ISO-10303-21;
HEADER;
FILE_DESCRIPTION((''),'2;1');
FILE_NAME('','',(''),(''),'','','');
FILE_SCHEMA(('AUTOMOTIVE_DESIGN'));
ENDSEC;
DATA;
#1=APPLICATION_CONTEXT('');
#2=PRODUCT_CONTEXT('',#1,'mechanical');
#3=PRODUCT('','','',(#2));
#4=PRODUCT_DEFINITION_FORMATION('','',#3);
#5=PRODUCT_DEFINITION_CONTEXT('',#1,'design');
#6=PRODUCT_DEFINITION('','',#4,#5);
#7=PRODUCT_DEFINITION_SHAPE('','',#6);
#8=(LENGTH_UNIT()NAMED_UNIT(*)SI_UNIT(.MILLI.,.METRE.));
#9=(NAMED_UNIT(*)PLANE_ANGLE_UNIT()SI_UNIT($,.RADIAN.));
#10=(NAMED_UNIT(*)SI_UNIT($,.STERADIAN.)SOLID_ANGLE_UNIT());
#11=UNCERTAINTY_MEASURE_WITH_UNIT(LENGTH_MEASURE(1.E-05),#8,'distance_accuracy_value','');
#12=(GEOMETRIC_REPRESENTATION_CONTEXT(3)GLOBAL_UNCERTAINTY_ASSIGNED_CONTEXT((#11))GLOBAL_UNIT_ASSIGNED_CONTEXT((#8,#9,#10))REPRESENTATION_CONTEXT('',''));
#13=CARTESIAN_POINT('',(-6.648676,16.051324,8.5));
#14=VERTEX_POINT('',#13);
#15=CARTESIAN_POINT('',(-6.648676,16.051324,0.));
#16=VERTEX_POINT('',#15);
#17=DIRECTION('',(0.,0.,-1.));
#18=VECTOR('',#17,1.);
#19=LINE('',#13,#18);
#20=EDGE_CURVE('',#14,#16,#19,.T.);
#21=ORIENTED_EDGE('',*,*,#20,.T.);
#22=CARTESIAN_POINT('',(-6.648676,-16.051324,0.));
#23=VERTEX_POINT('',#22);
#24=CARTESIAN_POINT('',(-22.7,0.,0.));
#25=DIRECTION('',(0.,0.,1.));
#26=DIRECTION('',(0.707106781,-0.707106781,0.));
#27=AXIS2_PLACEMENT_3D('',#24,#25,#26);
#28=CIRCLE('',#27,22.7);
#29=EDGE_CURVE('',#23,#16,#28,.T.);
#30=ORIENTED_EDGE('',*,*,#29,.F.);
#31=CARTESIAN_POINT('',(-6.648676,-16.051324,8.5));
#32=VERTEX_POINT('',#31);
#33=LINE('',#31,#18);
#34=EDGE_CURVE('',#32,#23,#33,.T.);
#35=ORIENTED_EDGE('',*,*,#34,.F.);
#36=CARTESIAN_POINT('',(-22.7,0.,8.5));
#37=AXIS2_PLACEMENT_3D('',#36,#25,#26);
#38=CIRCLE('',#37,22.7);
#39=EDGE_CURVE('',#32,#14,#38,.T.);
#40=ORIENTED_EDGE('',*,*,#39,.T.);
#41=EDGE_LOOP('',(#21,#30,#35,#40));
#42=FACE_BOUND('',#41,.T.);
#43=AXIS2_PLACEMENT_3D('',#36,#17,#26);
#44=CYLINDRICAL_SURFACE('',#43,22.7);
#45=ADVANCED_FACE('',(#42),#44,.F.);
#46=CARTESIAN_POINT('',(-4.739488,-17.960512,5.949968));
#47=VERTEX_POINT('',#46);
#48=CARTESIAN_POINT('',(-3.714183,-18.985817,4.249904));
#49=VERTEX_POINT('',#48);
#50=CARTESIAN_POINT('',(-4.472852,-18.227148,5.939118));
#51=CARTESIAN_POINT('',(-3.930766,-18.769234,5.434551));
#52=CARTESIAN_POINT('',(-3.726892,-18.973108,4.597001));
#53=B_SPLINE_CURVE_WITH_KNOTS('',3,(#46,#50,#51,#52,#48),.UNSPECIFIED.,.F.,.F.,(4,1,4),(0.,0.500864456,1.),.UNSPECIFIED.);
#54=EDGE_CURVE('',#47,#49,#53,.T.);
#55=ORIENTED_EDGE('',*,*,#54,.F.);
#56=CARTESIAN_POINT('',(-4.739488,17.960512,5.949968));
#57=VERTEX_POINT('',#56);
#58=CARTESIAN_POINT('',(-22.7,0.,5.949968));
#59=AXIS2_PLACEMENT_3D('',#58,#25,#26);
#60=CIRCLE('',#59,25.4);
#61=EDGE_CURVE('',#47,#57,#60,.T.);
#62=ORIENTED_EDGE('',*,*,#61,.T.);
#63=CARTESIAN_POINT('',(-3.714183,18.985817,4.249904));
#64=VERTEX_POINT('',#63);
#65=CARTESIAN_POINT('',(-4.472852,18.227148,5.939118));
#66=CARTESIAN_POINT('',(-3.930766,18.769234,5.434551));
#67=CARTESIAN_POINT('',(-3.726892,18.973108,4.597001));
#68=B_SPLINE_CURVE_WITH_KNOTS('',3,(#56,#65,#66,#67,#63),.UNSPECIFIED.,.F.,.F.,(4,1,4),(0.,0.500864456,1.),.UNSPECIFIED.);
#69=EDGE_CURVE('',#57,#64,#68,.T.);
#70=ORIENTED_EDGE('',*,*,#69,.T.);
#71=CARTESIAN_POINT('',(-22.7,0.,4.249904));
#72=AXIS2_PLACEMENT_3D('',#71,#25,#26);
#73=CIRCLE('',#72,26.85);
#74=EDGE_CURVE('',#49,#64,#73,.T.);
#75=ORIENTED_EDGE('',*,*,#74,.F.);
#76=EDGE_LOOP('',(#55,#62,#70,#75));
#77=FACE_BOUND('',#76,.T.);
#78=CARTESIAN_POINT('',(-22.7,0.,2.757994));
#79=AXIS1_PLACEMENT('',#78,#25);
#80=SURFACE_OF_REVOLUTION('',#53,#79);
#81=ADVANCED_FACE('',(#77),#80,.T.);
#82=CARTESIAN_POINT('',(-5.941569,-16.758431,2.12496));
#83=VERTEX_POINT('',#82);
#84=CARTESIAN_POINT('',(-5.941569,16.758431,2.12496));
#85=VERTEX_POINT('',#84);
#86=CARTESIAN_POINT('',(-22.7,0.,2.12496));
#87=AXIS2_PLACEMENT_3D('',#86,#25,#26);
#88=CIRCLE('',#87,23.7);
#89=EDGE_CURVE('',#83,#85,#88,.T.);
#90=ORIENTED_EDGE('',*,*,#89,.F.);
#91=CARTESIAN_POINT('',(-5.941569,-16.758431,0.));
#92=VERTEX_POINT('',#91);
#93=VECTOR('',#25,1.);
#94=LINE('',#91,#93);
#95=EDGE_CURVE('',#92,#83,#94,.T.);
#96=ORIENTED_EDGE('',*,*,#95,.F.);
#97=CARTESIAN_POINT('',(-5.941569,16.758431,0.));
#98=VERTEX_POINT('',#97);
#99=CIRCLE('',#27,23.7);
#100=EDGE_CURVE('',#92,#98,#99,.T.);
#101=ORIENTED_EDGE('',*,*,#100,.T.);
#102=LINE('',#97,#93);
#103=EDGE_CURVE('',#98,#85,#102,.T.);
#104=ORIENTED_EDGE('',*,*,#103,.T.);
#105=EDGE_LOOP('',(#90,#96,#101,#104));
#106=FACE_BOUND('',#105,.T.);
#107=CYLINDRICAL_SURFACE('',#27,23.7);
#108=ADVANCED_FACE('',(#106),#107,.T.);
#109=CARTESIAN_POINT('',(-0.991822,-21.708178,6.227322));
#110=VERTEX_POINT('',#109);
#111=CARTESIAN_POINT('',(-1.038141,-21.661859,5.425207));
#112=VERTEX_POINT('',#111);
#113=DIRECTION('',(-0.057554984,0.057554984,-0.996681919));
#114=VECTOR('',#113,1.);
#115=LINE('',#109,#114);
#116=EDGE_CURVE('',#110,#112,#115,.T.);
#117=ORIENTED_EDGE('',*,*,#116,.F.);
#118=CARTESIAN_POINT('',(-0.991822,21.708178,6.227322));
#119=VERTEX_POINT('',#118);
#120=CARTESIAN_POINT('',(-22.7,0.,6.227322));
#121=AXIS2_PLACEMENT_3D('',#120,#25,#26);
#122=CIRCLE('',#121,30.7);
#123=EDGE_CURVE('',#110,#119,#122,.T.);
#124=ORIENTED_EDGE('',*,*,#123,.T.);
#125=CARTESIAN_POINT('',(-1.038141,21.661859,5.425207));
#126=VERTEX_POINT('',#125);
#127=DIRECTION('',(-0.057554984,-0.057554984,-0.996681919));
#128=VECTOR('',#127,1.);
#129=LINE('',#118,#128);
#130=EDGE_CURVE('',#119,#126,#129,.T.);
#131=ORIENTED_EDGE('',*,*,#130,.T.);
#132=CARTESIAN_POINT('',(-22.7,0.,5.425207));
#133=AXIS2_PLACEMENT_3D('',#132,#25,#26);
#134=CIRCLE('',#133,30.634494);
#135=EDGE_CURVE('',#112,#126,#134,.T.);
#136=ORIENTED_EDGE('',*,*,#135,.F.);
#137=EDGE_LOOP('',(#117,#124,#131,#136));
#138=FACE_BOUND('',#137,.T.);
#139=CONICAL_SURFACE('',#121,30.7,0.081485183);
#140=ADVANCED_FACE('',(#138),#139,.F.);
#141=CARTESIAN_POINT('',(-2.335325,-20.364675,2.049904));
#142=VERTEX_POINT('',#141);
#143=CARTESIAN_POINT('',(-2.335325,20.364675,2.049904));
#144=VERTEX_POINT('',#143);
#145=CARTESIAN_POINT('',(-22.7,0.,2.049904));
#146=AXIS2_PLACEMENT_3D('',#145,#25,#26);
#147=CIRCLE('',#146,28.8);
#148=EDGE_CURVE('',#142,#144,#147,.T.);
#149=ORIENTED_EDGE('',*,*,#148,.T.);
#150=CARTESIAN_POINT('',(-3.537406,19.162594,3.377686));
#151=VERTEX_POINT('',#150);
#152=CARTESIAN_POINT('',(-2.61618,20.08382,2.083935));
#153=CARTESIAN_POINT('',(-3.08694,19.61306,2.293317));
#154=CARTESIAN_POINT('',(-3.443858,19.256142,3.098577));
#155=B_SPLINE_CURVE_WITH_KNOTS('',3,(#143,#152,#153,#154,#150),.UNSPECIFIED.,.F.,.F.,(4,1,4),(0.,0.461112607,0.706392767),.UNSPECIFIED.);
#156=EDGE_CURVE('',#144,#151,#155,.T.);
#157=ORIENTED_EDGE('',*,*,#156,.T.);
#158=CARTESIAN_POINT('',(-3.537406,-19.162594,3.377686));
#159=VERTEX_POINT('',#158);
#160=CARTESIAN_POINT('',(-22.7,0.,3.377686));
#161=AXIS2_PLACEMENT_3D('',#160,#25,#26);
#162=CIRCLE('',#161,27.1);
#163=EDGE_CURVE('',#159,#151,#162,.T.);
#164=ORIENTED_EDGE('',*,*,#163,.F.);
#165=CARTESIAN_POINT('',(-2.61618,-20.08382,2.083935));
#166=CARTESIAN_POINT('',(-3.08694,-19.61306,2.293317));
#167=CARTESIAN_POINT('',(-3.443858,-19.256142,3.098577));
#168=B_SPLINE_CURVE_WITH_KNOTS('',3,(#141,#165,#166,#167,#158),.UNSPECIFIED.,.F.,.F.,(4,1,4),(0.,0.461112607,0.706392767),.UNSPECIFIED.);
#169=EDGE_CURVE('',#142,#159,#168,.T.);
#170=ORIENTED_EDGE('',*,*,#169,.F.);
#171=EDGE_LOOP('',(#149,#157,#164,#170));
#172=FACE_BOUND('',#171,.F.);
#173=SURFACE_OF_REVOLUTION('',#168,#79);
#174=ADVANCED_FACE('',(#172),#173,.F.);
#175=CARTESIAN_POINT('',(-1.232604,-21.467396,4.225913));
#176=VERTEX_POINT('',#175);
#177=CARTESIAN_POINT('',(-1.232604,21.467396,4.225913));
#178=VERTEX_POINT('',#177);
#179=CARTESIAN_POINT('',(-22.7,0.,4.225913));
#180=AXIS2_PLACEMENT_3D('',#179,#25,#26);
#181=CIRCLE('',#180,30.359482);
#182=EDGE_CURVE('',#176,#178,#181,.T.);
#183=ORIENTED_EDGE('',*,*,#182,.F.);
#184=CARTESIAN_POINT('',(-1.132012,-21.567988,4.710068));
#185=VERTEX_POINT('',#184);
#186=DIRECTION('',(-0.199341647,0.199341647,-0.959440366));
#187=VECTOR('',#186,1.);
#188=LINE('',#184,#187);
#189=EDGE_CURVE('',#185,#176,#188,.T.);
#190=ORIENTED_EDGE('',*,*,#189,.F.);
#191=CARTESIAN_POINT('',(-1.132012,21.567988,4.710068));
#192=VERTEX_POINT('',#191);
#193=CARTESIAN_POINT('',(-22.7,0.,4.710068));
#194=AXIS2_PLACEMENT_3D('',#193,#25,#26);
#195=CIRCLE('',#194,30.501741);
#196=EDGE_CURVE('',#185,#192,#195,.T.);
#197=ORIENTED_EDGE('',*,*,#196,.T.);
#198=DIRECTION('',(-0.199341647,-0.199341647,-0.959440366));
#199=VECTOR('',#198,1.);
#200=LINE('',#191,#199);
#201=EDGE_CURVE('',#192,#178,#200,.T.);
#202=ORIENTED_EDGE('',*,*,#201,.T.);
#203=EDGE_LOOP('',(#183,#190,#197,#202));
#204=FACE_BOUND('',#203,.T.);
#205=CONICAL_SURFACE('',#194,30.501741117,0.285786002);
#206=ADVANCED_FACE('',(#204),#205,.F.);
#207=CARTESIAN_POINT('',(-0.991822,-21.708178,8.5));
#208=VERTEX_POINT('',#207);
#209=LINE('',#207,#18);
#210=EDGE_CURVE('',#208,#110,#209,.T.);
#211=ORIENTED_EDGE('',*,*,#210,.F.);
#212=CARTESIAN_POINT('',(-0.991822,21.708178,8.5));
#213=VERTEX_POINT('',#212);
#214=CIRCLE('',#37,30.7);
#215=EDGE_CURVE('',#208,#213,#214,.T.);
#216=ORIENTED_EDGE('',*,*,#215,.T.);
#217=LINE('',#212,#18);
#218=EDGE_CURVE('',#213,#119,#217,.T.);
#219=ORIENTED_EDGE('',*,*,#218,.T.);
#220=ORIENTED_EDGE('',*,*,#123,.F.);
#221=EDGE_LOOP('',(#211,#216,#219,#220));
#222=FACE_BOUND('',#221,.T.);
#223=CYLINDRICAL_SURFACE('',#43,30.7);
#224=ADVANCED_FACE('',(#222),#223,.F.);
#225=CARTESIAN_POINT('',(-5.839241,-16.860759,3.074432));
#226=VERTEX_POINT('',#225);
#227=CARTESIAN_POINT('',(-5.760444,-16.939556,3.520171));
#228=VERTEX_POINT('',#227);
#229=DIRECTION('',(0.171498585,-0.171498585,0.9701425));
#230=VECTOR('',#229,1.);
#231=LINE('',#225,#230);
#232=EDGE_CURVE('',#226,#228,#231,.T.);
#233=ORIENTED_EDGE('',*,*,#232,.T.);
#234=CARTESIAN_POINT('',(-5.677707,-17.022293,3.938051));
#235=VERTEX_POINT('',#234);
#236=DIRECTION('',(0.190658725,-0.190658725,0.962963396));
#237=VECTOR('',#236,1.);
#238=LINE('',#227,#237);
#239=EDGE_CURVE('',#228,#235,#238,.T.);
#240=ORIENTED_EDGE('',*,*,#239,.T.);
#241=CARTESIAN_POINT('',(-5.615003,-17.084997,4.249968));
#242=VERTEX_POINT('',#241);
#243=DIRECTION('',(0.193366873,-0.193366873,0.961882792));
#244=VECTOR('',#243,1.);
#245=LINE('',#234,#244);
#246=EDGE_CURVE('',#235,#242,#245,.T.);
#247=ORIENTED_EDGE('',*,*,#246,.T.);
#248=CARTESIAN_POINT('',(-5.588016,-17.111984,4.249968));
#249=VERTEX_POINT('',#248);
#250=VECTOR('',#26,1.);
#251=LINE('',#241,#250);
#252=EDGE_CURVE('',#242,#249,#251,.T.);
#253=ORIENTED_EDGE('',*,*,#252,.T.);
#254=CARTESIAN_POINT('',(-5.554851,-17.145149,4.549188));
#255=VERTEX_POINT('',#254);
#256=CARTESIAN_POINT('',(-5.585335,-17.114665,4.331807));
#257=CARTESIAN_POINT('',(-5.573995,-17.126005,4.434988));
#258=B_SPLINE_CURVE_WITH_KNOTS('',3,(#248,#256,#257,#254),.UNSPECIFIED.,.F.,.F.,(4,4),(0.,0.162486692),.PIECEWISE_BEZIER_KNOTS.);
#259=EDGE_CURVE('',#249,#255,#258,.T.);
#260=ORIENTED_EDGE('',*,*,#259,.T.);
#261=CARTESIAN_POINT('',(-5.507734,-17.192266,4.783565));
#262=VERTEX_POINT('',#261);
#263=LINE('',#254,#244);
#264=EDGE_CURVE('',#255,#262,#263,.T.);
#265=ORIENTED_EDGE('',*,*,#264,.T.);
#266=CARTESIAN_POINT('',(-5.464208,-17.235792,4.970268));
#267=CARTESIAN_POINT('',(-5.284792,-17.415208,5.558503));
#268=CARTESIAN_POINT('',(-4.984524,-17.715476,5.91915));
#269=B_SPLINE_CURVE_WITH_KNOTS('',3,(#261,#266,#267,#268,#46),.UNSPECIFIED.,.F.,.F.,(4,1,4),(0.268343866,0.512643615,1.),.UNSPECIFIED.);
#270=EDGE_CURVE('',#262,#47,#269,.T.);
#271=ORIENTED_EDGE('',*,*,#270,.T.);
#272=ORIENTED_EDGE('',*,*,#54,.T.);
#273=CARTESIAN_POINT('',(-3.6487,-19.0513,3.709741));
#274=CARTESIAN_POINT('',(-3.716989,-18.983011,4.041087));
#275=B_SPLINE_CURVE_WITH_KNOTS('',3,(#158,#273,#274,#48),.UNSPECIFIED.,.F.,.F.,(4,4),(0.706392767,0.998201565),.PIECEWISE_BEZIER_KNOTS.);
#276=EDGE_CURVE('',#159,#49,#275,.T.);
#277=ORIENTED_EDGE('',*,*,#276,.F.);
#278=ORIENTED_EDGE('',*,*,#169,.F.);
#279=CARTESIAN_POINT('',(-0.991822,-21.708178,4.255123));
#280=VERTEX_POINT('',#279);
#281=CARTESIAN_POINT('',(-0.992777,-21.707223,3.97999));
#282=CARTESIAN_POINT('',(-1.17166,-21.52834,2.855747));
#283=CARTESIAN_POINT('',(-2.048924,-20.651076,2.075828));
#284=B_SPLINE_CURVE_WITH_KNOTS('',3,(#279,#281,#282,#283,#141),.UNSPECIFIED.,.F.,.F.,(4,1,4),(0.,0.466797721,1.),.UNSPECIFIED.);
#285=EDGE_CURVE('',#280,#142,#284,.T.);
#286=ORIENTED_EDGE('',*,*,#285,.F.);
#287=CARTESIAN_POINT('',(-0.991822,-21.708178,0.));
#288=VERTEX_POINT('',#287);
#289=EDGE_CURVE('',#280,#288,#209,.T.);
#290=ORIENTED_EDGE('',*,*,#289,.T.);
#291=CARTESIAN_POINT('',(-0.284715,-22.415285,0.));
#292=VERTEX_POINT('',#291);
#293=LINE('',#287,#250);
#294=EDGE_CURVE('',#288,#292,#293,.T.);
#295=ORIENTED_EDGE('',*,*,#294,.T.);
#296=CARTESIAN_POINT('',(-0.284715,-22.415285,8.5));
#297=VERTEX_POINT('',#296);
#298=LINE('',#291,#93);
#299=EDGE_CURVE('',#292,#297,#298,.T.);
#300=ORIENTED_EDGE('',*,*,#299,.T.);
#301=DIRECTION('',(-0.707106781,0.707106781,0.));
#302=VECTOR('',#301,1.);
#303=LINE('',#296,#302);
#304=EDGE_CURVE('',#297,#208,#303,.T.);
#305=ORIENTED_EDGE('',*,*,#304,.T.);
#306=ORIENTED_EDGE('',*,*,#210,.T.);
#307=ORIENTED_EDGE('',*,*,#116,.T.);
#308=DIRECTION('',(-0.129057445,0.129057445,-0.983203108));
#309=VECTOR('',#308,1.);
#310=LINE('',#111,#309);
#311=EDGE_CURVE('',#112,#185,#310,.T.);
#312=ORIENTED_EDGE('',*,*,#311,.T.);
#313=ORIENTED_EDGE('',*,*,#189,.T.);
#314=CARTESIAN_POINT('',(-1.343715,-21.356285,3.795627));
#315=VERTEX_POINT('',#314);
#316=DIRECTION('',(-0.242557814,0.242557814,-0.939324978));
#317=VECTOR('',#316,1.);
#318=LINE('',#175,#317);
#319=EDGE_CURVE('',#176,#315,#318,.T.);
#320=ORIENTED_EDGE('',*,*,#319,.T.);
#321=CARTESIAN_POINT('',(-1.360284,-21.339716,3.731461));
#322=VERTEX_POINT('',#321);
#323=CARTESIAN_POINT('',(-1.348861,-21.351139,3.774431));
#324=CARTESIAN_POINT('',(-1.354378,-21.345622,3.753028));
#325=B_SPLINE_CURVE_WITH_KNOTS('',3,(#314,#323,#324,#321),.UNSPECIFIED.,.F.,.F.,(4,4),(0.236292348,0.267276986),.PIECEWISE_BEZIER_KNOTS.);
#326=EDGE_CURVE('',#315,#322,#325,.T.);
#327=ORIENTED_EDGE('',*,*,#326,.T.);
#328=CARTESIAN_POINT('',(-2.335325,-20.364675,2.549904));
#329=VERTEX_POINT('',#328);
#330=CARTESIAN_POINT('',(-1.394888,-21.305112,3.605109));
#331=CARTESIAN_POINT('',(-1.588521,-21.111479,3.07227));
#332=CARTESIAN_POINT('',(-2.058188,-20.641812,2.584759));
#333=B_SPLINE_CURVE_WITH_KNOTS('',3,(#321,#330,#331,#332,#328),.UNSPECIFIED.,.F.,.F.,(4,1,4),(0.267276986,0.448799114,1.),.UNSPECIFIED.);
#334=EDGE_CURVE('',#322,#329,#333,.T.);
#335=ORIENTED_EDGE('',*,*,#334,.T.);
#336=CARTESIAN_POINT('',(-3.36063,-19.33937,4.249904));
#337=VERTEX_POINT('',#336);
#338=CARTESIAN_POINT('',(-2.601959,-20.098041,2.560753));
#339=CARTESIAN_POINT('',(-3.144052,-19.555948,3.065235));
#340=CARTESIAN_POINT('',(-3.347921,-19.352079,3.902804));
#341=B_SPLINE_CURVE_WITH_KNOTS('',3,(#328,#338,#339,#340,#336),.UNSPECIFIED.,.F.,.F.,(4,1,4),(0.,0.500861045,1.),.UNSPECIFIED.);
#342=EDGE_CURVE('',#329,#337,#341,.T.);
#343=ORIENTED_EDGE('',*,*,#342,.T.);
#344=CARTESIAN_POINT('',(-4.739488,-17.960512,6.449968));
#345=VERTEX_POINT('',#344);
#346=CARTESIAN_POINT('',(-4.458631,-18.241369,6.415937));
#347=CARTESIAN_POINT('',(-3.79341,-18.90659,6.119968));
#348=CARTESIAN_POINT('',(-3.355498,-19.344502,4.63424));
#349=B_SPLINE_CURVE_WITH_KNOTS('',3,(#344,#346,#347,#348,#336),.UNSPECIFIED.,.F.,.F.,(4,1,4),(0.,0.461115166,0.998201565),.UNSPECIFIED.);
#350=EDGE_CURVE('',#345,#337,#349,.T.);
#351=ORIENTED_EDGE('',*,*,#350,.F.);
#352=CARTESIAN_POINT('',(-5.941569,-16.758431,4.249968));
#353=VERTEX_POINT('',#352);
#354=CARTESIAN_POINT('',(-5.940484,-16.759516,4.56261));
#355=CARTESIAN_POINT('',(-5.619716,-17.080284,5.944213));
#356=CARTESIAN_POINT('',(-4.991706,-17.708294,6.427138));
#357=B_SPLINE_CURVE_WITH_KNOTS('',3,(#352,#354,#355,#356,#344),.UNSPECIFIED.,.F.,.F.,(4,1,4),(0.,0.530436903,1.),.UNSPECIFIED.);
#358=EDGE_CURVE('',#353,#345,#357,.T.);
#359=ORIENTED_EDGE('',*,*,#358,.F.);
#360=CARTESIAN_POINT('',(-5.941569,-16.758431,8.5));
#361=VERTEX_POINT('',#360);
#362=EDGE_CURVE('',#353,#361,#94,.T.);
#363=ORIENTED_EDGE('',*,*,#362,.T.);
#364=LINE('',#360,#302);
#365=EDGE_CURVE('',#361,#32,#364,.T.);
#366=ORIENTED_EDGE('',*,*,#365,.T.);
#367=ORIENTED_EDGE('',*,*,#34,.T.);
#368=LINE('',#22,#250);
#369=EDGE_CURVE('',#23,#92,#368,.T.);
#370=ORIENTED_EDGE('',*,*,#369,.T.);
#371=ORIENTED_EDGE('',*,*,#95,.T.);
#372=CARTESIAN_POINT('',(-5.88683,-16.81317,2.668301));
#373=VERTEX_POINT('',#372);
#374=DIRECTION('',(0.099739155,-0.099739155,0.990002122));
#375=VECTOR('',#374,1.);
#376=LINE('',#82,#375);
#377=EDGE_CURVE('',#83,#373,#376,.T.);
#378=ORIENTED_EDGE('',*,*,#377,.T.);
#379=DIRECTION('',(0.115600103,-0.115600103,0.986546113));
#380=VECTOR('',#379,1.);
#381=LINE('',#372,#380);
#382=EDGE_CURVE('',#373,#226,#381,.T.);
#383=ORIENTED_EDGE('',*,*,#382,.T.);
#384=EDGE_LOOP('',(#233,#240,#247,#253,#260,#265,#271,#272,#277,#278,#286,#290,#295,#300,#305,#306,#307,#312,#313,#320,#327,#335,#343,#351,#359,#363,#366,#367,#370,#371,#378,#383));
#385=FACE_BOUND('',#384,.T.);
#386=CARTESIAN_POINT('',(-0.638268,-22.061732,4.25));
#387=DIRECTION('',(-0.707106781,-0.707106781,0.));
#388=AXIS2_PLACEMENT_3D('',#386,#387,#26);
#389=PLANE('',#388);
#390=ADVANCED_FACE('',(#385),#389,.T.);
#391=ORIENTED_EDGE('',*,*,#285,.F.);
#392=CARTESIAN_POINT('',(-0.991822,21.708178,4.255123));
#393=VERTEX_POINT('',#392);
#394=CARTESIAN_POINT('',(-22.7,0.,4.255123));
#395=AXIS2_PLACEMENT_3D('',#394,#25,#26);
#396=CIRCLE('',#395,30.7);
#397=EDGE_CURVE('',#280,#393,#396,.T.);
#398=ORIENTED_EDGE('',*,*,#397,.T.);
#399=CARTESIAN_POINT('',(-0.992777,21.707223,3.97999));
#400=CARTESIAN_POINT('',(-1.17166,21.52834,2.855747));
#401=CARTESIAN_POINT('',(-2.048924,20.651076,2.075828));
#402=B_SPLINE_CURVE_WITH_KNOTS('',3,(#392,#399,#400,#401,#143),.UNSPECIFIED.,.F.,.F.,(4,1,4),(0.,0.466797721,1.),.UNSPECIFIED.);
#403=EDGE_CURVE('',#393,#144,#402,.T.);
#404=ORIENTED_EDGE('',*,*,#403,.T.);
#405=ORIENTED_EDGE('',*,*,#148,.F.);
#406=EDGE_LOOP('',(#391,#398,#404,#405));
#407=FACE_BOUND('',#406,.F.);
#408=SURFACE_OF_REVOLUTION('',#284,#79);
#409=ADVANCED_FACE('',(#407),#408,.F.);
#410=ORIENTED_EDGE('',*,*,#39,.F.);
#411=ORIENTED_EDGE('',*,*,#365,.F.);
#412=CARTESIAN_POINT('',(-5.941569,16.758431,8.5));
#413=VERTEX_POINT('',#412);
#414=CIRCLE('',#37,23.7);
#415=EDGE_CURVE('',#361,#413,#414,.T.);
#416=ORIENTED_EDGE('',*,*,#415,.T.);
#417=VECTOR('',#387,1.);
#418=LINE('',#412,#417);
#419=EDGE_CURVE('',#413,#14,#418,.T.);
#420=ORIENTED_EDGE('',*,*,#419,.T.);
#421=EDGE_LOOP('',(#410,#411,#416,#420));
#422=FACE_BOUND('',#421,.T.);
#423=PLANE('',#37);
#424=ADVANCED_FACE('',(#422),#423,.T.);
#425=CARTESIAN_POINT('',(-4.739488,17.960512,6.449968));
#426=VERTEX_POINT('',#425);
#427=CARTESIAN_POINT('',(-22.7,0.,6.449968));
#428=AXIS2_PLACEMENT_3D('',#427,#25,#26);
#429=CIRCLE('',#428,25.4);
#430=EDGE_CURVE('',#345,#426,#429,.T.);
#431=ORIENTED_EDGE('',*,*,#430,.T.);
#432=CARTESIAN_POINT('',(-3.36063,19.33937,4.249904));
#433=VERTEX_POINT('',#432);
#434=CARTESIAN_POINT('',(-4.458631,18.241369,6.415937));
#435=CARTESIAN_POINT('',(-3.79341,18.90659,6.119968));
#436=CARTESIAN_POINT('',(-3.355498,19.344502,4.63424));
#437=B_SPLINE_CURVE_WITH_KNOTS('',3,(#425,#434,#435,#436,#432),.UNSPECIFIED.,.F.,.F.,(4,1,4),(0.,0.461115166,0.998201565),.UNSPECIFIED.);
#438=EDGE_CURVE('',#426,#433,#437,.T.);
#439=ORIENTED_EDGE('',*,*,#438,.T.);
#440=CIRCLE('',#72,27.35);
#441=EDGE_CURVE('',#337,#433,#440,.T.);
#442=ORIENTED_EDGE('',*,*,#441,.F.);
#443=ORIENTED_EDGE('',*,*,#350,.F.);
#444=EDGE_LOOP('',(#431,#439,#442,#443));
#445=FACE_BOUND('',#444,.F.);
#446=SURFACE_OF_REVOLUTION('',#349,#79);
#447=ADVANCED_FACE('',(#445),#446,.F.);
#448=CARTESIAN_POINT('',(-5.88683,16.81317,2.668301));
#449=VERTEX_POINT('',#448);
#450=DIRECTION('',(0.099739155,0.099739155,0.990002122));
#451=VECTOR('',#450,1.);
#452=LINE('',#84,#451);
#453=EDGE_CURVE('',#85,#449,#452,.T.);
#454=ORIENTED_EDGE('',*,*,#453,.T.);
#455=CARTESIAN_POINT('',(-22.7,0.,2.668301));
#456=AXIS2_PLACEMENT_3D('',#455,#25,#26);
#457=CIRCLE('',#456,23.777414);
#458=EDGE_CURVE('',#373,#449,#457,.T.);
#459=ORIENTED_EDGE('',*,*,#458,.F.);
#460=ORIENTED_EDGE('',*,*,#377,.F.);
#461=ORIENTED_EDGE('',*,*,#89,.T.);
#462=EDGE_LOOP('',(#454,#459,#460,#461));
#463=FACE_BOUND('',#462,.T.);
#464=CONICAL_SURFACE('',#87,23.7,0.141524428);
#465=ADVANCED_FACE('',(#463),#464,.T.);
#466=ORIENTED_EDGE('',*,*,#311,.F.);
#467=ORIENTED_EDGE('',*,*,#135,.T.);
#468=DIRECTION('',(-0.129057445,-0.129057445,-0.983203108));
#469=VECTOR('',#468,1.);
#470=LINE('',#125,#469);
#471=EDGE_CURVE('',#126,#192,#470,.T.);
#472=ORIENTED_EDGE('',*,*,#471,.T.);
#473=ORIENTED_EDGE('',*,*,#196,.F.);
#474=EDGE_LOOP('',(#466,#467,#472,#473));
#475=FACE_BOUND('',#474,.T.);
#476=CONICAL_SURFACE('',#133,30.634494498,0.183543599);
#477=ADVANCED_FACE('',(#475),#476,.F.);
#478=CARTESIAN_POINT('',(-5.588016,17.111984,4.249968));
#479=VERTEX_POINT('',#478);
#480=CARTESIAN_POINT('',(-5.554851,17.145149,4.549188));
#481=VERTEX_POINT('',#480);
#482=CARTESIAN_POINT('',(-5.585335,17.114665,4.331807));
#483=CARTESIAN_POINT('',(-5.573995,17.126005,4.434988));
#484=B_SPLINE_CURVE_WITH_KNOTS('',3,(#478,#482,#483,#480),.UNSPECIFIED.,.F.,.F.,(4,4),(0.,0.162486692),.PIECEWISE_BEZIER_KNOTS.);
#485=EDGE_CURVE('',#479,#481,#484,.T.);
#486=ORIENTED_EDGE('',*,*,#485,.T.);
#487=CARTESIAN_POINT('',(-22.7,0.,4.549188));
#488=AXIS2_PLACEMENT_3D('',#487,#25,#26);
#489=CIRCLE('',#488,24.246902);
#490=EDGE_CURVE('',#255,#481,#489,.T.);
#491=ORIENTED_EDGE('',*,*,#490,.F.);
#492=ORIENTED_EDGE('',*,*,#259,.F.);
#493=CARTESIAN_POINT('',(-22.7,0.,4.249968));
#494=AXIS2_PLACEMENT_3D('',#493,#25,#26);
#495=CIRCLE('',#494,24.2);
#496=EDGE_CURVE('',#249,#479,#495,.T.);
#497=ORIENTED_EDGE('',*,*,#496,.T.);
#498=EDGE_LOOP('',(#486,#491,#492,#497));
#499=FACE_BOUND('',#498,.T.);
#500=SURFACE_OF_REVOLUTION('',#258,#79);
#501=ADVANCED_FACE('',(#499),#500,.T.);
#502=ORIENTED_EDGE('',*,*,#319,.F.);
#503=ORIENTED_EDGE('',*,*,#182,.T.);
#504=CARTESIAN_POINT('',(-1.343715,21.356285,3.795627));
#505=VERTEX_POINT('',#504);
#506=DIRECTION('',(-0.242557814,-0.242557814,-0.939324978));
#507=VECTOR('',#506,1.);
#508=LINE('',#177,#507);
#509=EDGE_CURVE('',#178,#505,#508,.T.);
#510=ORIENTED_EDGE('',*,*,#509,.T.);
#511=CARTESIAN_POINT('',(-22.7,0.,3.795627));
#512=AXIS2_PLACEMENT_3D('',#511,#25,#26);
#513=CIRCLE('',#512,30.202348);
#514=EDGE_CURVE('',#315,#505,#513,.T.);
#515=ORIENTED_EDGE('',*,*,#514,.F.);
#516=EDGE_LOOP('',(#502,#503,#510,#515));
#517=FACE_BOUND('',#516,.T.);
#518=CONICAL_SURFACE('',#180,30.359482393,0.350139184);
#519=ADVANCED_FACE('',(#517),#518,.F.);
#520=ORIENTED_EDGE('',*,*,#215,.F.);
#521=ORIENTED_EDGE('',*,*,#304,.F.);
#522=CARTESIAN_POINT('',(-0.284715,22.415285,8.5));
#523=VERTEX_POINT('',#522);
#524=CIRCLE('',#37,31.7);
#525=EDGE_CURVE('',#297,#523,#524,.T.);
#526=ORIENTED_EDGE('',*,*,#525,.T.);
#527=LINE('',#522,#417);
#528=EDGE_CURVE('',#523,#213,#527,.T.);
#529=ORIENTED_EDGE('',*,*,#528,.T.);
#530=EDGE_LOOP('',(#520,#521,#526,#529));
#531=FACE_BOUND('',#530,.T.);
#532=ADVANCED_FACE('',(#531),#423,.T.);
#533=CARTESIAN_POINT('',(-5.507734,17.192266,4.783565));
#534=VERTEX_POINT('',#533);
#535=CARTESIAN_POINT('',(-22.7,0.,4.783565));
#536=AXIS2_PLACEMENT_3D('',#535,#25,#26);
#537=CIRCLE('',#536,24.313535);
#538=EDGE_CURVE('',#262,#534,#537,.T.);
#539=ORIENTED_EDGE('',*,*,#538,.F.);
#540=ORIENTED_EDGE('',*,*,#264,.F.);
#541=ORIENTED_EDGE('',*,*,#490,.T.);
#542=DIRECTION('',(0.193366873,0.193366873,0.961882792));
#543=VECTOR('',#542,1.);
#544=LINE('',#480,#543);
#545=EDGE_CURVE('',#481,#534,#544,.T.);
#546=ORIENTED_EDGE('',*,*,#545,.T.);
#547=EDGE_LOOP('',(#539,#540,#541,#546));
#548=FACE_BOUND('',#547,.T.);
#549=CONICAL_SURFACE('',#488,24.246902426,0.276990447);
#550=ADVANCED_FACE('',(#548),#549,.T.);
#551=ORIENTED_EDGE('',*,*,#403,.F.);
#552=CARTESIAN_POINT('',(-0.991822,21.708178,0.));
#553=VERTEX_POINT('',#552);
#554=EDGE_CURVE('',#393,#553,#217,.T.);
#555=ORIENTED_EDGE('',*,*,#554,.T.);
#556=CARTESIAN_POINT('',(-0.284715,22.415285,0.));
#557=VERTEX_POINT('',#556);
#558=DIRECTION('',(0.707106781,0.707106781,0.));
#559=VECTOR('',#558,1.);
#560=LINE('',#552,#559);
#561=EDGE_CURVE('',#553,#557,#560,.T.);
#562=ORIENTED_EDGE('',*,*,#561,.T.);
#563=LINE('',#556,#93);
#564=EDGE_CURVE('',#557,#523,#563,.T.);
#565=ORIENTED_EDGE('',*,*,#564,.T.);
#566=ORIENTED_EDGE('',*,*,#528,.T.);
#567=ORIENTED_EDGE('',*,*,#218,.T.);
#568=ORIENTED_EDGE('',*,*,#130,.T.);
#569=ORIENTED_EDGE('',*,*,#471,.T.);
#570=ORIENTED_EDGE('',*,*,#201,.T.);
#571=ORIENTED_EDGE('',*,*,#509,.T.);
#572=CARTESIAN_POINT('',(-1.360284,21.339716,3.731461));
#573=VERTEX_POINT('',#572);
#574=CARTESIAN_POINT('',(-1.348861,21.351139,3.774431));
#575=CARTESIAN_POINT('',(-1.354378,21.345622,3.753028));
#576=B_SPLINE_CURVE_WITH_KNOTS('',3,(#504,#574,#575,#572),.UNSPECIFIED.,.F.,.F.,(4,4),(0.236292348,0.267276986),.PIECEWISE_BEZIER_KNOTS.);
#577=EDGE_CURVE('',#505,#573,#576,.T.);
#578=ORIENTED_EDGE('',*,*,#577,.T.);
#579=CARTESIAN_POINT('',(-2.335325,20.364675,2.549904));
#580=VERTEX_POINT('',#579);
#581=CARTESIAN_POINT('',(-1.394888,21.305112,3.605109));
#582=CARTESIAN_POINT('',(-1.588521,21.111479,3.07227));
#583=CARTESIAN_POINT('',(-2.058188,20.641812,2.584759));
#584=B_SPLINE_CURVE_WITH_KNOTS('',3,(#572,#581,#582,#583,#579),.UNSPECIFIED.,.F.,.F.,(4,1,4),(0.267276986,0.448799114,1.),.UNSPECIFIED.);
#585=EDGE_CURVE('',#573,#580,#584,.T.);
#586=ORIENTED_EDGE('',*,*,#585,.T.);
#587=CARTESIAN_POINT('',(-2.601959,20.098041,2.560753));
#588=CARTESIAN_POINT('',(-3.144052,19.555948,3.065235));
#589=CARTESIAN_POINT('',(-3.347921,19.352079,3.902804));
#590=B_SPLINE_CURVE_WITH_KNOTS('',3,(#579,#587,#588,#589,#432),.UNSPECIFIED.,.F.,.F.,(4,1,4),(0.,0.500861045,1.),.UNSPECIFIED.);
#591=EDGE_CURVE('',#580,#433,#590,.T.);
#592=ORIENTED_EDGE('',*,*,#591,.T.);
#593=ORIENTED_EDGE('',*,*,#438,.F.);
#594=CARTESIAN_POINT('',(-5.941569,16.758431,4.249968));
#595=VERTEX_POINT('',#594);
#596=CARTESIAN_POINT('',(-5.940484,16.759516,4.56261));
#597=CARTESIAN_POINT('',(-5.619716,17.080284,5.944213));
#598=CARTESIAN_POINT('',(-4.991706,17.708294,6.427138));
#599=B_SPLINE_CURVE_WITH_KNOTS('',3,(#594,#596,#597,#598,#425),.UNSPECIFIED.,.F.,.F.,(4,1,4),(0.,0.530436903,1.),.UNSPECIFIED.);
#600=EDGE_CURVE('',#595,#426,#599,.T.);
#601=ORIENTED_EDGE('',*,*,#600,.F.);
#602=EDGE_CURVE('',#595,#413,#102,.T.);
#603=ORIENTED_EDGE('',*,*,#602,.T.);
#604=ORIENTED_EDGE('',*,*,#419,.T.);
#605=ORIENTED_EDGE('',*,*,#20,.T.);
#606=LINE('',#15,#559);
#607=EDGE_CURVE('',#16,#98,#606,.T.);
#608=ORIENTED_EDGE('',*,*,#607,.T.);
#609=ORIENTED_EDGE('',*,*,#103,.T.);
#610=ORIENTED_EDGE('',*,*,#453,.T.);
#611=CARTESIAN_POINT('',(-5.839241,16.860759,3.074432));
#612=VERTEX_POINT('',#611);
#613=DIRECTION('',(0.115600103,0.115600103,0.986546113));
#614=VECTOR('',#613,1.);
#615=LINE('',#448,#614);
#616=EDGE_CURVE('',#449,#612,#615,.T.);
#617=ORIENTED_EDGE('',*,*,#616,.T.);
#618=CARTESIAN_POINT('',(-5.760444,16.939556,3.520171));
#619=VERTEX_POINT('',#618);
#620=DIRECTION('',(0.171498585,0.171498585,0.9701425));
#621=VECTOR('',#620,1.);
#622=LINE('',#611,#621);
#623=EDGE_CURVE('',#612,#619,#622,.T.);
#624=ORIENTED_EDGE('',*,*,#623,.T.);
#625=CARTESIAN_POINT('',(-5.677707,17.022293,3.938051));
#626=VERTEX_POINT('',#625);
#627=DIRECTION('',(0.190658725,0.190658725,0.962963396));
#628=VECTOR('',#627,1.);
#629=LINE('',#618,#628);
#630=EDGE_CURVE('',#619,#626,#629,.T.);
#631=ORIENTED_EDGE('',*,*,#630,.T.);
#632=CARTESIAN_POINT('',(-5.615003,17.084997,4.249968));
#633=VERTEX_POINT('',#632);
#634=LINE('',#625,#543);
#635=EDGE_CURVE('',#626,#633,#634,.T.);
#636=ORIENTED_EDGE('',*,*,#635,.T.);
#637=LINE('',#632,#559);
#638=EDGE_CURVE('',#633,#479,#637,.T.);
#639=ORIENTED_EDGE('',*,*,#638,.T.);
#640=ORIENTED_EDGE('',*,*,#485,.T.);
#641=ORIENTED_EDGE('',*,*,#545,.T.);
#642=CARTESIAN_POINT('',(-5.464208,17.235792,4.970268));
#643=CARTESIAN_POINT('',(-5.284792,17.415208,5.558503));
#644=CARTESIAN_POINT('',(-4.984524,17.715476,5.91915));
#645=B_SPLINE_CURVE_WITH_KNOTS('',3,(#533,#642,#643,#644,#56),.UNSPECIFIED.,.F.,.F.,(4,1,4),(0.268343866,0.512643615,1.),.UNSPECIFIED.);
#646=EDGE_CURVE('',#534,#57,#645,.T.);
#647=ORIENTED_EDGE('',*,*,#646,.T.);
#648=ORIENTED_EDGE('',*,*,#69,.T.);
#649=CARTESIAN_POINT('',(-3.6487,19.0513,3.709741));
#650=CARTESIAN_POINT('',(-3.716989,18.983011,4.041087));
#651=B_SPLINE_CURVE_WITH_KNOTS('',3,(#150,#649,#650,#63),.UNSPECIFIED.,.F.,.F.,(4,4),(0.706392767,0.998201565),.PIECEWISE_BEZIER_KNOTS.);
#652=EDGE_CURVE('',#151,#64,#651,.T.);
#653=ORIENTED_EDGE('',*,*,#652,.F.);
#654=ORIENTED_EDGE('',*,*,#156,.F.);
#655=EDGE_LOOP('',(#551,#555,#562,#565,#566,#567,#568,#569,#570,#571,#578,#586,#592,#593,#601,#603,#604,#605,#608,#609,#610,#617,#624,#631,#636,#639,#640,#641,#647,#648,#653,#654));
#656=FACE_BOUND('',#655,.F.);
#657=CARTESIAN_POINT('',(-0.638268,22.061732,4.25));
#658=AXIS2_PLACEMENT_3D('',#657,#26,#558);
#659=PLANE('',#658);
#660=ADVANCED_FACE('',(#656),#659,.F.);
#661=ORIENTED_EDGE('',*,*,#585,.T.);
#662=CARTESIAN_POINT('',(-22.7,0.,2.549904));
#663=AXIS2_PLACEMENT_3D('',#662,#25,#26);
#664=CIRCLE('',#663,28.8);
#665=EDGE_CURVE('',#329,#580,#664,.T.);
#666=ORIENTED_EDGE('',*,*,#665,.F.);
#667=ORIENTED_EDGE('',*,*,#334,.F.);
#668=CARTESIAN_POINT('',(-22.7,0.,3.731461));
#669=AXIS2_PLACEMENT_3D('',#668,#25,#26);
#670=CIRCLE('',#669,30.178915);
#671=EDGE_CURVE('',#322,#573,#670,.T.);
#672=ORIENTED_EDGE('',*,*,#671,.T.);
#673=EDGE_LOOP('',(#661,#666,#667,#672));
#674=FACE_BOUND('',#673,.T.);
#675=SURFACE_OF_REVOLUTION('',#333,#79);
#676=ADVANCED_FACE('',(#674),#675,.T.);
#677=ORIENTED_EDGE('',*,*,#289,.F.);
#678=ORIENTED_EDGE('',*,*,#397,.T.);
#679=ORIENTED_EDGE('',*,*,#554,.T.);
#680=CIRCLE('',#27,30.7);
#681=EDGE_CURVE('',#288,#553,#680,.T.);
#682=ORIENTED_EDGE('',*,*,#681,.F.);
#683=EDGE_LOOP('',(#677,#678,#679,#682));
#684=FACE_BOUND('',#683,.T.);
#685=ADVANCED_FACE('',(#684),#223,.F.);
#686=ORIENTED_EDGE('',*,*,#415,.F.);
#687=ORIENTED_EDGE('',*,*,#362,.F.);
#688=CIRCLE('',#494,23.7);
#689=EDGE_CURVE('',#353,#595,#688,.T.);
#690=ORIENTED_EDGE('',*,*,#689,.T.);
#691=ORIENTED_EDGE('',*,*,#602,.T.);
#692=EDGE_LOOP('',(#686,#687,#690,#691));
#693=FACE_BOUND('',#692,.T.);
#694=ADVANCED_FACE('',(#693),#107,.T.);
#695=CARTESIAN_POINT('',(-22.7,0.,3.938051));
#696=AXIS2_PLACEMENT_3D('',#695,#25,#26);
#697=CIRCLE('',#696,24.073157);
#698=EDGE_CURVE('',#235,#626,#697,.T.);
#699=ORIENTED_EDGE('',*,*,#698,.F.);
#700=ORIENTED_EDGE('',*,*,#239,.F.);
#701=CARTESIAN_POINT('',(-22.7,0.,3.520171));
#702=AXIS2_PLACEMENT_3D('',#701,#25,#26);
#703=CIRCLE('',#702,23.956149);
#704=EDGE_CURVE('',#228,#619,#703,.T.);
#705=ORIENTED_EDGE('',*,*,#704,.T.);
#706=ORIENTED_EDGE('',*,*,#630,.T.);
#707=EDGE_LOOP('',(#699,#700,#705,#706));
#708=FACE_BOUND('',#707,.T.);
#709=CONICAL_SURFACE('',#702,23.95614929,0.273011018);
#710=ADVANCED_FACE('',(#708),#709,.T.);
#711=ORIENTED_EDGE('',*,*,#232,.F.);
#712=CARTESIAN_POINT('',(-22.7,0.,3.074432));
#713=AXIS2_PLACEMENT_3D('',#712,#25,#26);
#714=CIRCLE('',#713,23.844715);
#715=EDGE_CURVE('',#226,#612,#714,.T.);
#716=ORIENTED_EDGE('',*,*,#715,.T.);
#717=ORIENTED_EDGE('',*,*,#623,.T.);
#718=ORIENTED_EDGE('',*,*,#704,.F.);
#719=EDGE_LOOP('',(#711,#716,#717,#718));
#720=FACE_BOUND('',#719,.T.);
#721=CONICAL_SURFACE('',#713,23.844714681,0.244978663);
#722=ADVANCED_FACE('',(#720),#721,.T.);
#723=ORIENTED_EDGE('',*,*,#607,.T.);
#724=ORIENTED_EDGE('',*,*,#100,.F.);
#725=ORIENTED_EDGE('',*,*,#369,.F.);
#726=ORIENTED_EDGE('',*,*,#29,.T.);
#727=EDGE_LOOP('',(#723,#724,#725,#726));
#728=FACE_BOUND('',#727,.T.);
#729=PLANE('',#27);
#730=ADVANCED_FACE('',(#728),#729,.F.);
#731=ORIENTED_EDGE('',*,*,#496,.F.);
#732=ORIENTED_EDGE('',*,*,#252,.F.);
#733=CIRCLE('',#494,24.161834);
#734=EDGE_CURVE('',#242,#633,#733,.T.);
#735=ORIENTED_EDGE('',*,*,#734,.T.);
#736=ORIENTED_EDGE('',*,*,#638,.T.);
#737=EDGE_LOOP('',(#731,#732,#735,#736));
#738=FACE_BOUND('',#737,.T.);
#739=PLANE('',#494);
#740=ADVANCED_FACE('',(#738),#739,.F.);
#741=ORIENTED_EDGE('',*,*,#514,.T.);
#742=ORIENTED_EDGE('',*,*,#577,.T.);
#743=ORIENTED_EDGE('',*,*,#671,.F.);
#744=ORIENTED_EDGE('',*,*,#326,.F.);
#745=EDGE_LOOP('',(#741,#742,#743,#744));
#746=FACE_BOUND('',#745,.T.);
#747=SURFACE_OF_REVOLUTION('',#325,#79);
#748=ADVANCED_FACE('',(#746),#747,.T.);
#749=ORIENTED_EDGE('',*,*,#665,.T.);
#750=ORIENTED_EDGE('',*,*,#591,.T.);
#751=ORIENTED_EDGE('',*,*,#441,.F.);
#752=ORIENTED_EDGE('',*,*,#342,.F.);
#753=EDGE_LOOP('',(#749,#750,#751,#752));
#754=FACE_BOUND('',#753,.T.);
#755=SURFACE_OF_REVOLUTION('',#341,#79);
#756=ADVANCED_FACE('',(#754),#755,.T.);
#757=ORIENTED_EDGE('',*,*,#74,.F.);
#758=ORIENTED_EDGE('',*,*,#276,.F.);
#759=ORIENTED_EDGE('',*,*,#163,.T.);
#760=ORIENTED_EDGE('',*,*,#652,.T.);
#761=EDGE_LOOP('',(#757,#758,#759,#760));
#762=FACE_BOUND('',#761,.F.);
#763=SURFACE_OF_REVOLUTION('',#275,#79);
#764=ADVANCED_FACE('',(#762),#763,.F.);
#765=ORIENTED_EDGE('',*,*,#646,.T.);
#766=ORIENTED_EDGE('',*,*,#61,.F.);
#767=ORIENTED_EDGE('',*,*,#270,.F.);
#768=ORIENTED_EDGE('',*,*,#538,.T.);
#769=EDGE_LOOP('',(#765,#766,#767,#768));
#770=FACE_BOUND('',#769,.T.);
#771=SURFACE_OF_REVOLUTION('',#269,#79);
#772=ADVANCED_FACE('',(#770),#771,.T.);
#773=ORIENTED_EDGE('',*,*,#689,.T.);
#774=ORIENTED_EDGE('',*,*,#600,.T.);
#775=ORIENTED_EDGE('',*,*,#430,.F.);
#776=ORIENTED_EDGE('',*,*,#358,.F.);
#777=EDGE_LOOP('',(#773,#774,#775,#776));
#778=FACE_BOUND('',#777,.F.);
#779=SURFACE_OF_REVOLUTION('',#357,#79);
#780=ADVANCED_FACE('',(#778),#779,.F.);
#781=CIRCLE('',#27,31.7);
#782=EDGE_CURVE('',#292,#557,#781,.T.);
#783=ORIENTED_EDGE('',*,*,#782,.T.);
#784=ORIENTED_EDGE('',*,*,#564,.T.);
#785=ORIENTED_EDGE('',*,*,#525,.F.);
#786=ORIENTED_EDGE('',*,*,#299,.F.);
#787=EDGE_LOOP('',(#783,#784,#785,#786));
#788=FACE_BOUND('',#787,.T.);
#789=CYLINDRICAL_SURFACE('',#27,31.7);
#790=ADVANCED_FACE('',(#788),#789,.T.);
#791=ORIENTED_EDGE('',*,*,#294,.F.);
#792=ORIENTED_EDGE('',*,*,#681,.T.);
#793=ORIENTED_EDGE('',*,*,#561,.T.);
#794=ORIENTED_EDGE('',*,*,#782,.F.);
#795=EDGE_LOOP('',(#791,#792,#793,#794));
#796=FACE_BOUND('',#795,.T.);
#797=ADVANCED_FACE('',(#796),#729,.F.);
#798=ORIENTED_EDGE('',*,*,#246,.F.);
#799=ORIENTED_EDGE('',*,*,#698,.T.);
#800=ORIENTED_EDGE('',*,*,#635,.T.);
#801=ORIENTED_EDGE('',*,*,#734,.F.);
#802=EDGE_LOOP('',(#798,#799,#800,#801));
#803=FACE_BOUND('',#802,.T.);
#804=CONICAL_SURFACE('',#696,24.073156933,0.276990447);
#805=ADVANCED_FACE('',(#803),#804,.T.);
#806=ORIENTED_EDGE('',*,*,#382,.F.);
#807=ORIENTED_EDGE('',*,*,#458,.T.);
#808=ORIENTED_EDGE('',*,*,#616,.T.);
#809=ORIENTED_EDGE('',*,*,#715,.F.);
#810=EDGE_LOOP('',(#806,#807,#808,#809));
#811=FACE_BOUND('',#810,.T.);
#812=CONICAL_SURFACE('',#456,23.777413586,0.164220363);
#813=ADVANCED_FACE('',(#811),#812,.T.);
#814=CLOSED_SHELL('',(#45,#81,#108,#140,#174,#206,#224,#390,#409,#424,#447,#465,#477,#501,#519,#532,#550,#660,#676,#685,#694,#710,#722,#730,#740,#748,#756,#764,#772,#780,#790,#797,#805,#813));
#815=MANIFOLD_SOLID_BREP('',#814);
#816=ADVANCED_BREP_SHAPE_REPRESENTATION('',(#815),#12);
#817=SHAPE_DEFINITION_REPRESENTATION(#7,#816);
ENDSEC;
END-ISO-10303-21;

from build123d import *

# Parameters (mm, degrees)
F1_ANGLE_BACK = 45
F1_ANGLE      = 90


# Not quite as in the source:
# - ends of sketch curves that miss each other by under 0.0002 mm in the source are joined


with BuildPart() as f1:
    # F0 (on Front) → F1 (revolve)
    with BuildSketch(Plane.XZ, mode=Mode.PRIVATE) as f1_sk:
        Polygon((8, 4.2551231384), (8, 0), (9, 0), (9, 8.5), (8, 8.5), (8, 6.2273216248), align=None)
        Polygon((1, 2.124959883), (1, 4.2499679064), (1, 8.5), (0, 8.5), (0, 0), (1, 0), align=None)
        with BuildLine():
            add(Edge.make_bspline(
                [(1.6135353927, 4.7835650405), (1.6750901529, 4.970267715), (1.9288235062, 5.5585034544), (2.3534665623, 5.9191497273), (2.7, 5.9499679064)],
                knots=[0.2683438661, 0.2683438661, 0.2683438661, 0.2683438661, 0.5126436151, 1, 1, 1, 1], degree=3))
            Line((2.7, 5.9499679064), (2.7, 6.4499679064))
            add(Edge.make_bspline(
                [(1, 4.2499679064), (1.0015353048, 4.5626104683), (1.4551687546, 5.9442127178), (2.3433097433, 6.4271380926), (2.7, 6.4499679064)],
                knots=[0, 0, 0, 0, 0.5304369026, 1, 1, 1, 1], degree=3))
            Line((1, 4.2499679064), (1.4618344062, 4.2499679064))
            Line((1.4618344062, 4.2499679064), (1.5469024263, 4.5491884505))
            add(Edge.make_bspline(
                [(1.5469024263, 4.5491884505), (1.5645406816, 4.6235882391), (1.5868631876, 4.702665172), (1.6135353927, 4.7835650405)],
                knots=[0.1624866916, 0.1624866916, 0.1624866916, 0.1624866916, 0.2683438661, 0.2683438661, 0.2683438661, 0.2683438661], degree=3))
        make_face()
        with BuildLine():
            add(Edge.make_bspline(
                [(8, 4.2551231384), (7.9986488935, 3.9799898766), (7.7456702226, 2.8557466438), (6.505031952, 2.0758276235), (6.1, 2.0499037191)],
                knots=[0, 0, 0, 0, 0.4667977205, 1, 1, 1, 1], degree=3))
            Line((8, 4.2551231384), (8, 6.2273216248))
            Line((8, 6.2273216248), (7.9344944983, 5.4252070189))
            Line((7.9344944983, 5.4252070189), (7.801741117, 4.7100675088))
            Line((7.801741117, 4.7100675088), (7.6594823926, 4.2259131372))
            Line((7.6594823926, 4.2259131372), (7.5023478676, 3.7956271327))
            add(Edge.make_bspline(
                [(7.5023478676, 3.7956271327), (7.4950709382, 3.7744309229), (7.487268414, 3.753028112), (7.4789151485, 3.7314606417)],
                knots=[0.2362923479, 0.2362923479, 0.2362923479, 0.2362923479, 0.2672769863, 0.2672769863, 0.2672769863, 0.2672769863], degree=3))
            add(Edge.make_bspline(
                [(7.4789151485, 3.7314606417), (7.429977914, 3.6051085751), (7.1561404277, 3.07227024), (6.4919298971, 2.5847591313), (6.1, 2.5499037191)],
                knots=[0.2672769863, 0.2672769863, 0.2672769863, 0.2672769863, 0.4487991142, 1, 1, 1, 1], degree=3))
            add(Edge.make_bspline(
                [(6.1, 2.5499037191), (5.722922109, 2.560753403), (4.9562868612, 3.0652346955), (4.6679732537, 3.9028036589), (4.6499999995, 4.249903719)],
                knots=[0, 0, 0, 0, 0.5008610447, 1, 1, 1, 1], degree=3))
            add(Edge.make_bspline(
                [(2.7, 6.4499679064), (3.0971914861, 6.4159367347), (4.0379566942, 6.1199675516), (4.6572574431, 4.6342403799), (4.6499999995, 4.249903719)],
                knots=[0, 0, 0, 0, 0.4611151657, 0.9982015649, 0.9982015649, 0.9982015649, 0.9982015649], degree=3))
            Line((2.7, 6.4499679064), (2.7, 5.9499679064))
            add(Edge.make_bspline(
                [(2.7, 5.9499679064), (3.0770804596, 5.9391181486), (3.8437046032, 5.4345511486), (4.1320268683, 4.5970014065), (4.1499999995, 4.249903719)],
                knots=[0, 0, 0, 0, 0.5008644565, 1, 1, 1, 1], degree=3))
            add(Edge.make_bspline(
                [(4.3999999995, 3.3776864381), (4.2426068049, 3.7097412493), (4.1460321192, 4.0410870495), (4.1499999995, 4.249903719)],
                knots=[0.7063927669, 0.7063927669, 0.7063927669, 0.7063927669, 0.9982015652, 0.9982015652, 0.9982015652, 0.9982015652], degree=3))
            add(Edge.make_bspline(
                [(6.1, 2.0499037191), (5.7028107176, 2.0839347019), (5.0370554507, 2.2933169546), (4.5322969972, 3.0985774544), (4.3999999995, 3.3776864381)],
                knots=[0, 0, 0, 0, 0.4611126073, 0.7063927669, 0.7063927669, 0.7063927669, 0.7063927669], degree=3))
        make_face()
        with BuildLine():
            Line((1.5469024263, 4.5491884505), (1.6135353927, 4.7835650405))
            add(Edge.make_bspline(
                [(1.5469024263, 4.5491884505), (1.5645406816, 4.6235882391), (1.5868631876, 4.702665172), (1.6135353927, 4.7835650405)],
                knots=[0.1624866916, 0.1624866916, 0.1624866916, 0.1624866916, 0.2683438661, 0.2683438661, 0.2683438661, 0.2683438661], degree=3))
        make_face()
        Polygon((1.4618344062, 4.2499679064), (1, 4.2499679064), (1, 2.124959883), (1.0774135864, 2.6683010762), (1.144714681, 3.0744322246), (1.2561492896, 3.5201706593), (1.3731569326, 3.9380513733), align=None)
        with BuildLine():
            add(Edge.make_bspline(
                [(1.5, 4.2499679064), (1.5037909347, 4.3318066745), (1.5198283827, 4.4349876364), (1.5469024263, 4.5491884505)],
                knots=[0, 0, 0, 0, 0.1624866916, 0.1624866916, 0.1624866916, 0.1624866916], degree=3))
            Line((1.5469024263, 4.5491884505), (1.4618344062, 4.2499679064))
            Line((1.4618344062, 4.2499679064), (1.5, 4.2499679064))
        make_face()
    revolve(f1_sk.sketch.rotate(Axis((-22.7, 0, 2.7579944581), (0, 0, 1)), -F1_ANGLE_BACK), axis=Axis((-22.7, 0, 2.7579944581), (0, 0, 1)), revolution_arc=F1_ANGLE)


solid = f1.part
